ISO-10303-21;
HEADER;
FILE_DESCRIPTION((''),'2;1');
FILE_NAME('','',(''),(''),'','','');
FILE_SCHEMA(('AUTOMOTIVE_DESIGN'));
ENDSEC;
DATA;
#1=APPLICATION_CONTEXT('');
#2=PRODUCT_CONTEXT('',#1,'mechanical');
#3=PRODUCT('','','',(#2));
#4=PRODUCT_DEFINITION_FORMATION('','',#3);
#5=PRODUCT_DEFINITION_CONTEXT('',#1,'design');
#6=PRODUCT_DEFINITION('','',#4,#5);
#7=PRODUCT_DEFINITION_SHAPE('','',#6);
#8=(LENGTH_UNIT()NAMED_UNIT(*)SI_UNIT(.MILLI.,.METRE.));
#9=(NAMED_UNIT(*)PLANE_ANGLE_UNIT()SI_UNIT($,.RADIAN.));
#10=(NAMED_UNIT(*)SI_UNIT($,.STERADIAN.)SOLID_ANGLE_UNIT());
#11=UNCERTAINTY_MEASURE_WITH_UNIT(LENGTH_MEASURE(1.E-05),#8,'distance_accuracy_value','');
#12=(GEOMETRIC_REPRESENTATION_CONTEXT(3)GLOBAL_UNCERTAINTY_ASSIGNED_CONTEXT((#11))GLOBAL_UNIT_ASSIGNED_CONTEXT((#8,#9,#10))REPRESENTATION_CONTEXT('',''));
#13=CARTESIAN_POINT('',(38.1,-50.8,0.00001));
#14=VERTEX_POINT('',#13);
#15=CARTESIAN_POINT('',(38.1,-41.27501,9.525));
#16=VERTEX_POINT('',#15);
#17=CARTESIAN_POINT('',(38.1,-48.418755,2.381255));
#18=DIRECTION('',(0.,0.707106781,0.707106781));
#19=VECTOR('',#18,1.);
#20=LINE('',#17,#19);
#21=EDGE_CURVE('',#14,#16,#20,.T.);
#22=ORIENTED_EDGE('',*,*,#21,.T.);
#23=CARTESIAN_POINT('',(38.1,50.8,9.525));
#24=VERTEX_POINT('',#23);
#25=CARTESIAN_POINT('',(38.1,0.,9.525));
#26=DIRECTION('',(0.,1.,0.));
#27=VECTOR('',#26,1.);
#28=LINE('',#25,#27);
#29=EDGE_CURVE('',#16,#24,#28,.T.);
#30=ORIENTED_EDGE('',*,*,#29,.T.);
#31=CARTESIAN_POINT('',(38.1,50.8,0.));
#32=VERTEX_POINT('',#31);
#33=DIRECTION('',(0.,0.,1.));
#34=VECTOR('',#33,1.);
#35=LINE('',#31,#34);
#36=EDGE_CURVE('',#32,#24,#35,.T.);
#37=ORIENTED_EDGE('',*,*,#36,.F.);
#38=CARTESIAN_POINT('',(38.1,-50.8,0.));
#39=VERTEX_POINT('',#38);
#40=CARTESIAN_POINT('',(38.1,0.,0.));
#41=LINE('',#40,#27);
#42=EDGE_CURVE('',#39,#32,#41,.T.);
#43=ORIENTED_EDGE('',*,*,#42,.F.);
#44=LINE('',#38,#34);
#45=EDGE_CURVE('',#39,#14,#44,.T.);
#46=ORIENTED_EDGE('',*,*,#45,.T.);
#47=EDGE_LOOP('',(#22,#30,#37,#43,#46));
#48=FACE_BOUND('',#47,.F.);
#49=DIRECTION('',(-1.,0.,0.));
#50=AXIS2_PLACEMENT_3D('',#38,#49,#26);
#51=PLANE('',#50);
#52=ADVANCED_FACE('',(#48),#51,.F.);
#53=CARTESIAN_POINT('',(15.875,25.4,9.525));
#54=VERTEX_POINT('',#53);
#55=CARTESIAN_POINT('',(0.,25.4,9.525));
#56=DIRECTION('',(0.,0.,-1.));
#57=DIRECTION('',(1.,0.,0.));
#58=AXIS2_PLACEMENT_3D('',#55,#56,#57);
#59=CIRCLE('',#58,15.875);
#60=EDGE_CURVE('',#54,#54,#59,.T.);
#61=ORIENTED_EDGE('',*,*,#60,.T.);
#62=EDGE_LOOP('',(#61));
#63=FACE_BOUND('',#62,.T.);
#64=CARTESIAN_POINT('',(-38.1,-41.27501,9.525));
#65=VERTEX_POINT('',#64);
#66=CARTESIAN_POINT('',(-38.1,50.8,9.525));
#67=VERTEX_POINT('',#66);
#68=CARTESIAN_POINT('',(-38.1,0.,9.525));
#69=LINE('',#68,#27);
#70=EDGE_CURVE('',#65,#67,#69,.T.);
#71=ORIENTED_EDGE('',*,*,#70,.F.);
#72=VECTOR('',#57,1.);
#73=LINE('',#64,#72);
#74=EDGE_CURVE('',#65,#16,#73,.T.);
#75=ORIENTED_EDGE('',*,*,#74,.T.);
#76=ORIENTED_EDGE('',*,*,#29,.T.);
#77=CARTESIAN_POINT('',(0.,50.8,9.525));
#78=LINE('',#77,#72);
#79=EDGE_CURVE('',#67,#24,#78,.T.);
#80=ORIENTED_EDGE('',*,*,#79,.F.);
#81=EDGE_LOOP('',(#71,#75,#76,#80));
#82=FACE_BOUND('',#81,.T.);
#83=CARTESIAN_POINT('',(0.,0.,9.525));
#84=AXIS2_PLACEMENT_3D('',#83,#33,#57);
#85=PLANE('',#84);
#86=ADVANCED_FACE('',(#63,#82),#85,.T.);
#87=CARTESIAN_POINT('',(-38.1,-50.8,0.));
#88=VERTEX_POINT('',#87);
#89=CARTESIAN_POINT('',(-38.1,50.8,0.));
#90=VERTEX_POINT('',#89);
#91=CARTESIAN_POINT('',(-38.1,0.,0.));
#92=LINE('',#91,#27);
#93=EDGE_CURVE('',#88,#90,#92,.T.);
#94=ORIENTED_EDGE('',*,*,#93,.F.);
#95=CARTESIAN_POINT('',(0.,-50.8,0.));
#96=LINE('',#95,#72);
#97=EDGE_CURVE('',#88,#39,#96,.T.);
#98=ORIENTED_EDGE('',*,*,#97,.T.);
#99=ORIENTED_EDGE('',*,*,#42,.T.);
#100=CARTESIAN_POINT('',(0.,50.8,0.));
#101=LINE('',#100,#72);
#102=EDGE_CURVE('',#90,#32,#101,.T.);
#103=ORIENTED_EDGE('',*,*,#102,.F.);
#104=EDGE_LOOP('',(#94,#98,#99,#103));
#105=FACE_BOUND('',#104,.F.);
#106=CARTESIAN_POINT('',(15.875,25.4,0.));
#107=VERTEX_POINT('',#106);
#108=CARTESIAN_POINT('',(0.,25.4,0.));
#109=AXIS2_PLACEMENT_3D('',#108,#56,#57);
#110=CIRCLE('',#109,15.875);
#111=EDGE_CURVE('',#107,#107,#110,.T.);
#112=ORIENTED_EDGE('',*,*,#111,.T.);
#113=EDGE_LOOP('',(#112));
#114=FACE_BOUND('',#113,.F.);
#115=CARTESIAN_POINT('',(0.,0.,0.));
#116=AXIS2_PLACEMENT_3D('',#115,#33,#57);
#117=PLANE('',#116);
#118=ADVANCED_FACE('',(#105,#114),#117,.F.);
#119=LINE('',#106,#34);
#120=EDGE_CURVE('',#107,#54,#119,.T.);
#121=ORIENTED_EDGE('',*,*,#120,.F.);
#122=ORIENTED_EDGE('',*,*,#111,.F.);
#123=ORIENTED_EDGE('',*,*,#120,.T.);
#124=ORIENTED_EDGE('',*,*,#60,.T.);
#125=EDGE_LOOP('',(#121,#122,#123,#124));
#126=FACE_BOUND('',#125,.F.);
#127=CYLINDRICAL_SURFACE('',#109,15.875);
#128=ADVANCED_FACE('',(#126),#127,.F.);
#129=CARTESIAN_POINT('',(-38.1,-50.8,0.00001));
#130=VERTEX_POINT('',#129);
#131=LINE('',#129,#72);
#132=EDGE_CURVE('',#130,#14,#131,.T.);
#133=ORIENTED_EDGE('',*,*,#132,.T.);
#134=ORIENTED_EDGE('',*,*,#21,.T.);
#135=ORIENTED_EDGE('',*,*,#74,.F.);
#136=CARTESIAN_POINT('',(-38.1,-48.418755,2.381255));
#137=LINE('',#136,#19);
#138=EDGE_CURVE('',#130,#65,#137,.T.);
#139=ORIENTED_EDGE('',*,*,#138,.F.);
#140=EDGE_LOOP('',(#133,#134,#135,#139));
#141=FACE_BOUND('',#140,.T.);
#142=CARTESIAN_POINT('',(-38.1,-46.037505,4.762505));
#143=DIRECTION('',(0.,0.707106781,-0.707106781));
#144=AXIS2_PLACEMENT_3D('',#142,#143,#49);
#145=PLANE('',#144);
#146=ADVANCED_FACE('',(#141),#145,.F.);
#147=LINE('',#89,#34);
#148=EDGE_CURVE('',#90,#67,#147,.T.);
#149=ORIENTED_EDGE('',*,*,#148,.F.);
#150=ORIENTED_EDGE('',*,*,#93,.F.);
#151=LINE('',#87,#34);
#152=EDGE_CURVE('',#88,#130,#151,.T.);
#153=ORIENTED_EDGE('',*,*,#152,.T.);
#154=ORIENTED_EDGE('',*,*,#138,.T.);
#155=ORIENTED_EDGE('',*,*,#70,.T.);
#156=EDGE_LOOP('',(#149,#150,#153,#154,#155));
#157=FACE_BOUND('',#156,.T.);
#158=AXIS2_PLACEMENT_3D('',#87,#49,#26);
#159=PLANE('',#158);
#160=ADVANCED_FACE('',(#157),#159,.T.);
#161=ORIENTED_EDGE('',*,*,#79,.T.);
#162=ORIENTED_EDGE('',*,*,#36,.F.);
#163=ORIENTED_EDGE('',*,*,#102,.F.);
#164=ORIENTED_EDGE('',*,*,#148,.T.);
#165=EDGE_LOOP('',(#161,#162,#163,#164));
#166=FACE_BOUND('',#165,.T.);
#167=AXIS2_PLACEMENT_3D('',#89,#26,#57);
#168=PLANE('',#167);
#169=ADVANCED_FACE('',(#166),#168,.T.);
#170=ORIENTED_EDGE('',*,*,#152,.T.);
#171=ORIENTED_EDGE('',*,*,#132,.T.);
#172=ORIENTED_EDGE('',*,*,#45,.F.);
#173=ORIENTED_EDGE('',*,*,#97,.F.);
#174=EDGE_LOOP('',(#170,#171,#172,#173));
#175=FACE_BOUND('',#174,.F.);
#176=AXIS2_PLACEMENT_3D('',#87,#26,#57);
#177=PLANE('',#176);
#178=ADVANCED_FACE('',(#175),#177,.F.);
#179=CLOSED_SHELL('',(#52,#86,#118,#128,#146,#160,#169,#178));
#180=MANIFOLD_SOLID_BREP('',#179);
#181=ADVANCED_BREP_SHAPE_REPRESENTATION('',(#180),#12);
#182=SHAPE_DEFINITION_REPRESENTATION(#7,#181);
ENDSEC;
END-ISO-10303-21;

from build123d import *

# Parameters (mm, degrees)
F0_W     = 76.2
F0_H     = 101.6
F1_DEPTH = 9.525
F2_SIZE  = 9.52499
F3_R     = 15.875
F4_DEPTH = 9.525


# Not quite as in the source:
# - a fillet or chamfer is up to 0.001 mm smaller than in the source, because OpenCascade refuses the exact size


with BuildPart() as f1:
    # F0 (on Top) → F1 (new body)
    with BuildSketch(Plane.XY):
        Rectangle(F0_W, F0_H)
    extrude(amount=F1_DEPTH)

    # F2 (size 9.525 in the source; OpenCascade refuses exactly that, so slightly less here)
    f2_edges = [f1.edges().sort_by_distance(p)[0] for p in [
        (0, -50.8, 9.525),
    ]]
    chamfer(f2_edges, length=F2_SIZE)

    # F3 (on face) → F4 (cut)
    with BuildSketch(Plane(origin=(0, 0, 0), x_dir=(1, 0, 0), z_dir=(0, 0, -1))):
        with Locations((0, -25.4)):
            Circle(F3_R)
    extrude(amount=-F4_DEPTH, mode=Mode.SUBTRACT)


solid = f1.part
